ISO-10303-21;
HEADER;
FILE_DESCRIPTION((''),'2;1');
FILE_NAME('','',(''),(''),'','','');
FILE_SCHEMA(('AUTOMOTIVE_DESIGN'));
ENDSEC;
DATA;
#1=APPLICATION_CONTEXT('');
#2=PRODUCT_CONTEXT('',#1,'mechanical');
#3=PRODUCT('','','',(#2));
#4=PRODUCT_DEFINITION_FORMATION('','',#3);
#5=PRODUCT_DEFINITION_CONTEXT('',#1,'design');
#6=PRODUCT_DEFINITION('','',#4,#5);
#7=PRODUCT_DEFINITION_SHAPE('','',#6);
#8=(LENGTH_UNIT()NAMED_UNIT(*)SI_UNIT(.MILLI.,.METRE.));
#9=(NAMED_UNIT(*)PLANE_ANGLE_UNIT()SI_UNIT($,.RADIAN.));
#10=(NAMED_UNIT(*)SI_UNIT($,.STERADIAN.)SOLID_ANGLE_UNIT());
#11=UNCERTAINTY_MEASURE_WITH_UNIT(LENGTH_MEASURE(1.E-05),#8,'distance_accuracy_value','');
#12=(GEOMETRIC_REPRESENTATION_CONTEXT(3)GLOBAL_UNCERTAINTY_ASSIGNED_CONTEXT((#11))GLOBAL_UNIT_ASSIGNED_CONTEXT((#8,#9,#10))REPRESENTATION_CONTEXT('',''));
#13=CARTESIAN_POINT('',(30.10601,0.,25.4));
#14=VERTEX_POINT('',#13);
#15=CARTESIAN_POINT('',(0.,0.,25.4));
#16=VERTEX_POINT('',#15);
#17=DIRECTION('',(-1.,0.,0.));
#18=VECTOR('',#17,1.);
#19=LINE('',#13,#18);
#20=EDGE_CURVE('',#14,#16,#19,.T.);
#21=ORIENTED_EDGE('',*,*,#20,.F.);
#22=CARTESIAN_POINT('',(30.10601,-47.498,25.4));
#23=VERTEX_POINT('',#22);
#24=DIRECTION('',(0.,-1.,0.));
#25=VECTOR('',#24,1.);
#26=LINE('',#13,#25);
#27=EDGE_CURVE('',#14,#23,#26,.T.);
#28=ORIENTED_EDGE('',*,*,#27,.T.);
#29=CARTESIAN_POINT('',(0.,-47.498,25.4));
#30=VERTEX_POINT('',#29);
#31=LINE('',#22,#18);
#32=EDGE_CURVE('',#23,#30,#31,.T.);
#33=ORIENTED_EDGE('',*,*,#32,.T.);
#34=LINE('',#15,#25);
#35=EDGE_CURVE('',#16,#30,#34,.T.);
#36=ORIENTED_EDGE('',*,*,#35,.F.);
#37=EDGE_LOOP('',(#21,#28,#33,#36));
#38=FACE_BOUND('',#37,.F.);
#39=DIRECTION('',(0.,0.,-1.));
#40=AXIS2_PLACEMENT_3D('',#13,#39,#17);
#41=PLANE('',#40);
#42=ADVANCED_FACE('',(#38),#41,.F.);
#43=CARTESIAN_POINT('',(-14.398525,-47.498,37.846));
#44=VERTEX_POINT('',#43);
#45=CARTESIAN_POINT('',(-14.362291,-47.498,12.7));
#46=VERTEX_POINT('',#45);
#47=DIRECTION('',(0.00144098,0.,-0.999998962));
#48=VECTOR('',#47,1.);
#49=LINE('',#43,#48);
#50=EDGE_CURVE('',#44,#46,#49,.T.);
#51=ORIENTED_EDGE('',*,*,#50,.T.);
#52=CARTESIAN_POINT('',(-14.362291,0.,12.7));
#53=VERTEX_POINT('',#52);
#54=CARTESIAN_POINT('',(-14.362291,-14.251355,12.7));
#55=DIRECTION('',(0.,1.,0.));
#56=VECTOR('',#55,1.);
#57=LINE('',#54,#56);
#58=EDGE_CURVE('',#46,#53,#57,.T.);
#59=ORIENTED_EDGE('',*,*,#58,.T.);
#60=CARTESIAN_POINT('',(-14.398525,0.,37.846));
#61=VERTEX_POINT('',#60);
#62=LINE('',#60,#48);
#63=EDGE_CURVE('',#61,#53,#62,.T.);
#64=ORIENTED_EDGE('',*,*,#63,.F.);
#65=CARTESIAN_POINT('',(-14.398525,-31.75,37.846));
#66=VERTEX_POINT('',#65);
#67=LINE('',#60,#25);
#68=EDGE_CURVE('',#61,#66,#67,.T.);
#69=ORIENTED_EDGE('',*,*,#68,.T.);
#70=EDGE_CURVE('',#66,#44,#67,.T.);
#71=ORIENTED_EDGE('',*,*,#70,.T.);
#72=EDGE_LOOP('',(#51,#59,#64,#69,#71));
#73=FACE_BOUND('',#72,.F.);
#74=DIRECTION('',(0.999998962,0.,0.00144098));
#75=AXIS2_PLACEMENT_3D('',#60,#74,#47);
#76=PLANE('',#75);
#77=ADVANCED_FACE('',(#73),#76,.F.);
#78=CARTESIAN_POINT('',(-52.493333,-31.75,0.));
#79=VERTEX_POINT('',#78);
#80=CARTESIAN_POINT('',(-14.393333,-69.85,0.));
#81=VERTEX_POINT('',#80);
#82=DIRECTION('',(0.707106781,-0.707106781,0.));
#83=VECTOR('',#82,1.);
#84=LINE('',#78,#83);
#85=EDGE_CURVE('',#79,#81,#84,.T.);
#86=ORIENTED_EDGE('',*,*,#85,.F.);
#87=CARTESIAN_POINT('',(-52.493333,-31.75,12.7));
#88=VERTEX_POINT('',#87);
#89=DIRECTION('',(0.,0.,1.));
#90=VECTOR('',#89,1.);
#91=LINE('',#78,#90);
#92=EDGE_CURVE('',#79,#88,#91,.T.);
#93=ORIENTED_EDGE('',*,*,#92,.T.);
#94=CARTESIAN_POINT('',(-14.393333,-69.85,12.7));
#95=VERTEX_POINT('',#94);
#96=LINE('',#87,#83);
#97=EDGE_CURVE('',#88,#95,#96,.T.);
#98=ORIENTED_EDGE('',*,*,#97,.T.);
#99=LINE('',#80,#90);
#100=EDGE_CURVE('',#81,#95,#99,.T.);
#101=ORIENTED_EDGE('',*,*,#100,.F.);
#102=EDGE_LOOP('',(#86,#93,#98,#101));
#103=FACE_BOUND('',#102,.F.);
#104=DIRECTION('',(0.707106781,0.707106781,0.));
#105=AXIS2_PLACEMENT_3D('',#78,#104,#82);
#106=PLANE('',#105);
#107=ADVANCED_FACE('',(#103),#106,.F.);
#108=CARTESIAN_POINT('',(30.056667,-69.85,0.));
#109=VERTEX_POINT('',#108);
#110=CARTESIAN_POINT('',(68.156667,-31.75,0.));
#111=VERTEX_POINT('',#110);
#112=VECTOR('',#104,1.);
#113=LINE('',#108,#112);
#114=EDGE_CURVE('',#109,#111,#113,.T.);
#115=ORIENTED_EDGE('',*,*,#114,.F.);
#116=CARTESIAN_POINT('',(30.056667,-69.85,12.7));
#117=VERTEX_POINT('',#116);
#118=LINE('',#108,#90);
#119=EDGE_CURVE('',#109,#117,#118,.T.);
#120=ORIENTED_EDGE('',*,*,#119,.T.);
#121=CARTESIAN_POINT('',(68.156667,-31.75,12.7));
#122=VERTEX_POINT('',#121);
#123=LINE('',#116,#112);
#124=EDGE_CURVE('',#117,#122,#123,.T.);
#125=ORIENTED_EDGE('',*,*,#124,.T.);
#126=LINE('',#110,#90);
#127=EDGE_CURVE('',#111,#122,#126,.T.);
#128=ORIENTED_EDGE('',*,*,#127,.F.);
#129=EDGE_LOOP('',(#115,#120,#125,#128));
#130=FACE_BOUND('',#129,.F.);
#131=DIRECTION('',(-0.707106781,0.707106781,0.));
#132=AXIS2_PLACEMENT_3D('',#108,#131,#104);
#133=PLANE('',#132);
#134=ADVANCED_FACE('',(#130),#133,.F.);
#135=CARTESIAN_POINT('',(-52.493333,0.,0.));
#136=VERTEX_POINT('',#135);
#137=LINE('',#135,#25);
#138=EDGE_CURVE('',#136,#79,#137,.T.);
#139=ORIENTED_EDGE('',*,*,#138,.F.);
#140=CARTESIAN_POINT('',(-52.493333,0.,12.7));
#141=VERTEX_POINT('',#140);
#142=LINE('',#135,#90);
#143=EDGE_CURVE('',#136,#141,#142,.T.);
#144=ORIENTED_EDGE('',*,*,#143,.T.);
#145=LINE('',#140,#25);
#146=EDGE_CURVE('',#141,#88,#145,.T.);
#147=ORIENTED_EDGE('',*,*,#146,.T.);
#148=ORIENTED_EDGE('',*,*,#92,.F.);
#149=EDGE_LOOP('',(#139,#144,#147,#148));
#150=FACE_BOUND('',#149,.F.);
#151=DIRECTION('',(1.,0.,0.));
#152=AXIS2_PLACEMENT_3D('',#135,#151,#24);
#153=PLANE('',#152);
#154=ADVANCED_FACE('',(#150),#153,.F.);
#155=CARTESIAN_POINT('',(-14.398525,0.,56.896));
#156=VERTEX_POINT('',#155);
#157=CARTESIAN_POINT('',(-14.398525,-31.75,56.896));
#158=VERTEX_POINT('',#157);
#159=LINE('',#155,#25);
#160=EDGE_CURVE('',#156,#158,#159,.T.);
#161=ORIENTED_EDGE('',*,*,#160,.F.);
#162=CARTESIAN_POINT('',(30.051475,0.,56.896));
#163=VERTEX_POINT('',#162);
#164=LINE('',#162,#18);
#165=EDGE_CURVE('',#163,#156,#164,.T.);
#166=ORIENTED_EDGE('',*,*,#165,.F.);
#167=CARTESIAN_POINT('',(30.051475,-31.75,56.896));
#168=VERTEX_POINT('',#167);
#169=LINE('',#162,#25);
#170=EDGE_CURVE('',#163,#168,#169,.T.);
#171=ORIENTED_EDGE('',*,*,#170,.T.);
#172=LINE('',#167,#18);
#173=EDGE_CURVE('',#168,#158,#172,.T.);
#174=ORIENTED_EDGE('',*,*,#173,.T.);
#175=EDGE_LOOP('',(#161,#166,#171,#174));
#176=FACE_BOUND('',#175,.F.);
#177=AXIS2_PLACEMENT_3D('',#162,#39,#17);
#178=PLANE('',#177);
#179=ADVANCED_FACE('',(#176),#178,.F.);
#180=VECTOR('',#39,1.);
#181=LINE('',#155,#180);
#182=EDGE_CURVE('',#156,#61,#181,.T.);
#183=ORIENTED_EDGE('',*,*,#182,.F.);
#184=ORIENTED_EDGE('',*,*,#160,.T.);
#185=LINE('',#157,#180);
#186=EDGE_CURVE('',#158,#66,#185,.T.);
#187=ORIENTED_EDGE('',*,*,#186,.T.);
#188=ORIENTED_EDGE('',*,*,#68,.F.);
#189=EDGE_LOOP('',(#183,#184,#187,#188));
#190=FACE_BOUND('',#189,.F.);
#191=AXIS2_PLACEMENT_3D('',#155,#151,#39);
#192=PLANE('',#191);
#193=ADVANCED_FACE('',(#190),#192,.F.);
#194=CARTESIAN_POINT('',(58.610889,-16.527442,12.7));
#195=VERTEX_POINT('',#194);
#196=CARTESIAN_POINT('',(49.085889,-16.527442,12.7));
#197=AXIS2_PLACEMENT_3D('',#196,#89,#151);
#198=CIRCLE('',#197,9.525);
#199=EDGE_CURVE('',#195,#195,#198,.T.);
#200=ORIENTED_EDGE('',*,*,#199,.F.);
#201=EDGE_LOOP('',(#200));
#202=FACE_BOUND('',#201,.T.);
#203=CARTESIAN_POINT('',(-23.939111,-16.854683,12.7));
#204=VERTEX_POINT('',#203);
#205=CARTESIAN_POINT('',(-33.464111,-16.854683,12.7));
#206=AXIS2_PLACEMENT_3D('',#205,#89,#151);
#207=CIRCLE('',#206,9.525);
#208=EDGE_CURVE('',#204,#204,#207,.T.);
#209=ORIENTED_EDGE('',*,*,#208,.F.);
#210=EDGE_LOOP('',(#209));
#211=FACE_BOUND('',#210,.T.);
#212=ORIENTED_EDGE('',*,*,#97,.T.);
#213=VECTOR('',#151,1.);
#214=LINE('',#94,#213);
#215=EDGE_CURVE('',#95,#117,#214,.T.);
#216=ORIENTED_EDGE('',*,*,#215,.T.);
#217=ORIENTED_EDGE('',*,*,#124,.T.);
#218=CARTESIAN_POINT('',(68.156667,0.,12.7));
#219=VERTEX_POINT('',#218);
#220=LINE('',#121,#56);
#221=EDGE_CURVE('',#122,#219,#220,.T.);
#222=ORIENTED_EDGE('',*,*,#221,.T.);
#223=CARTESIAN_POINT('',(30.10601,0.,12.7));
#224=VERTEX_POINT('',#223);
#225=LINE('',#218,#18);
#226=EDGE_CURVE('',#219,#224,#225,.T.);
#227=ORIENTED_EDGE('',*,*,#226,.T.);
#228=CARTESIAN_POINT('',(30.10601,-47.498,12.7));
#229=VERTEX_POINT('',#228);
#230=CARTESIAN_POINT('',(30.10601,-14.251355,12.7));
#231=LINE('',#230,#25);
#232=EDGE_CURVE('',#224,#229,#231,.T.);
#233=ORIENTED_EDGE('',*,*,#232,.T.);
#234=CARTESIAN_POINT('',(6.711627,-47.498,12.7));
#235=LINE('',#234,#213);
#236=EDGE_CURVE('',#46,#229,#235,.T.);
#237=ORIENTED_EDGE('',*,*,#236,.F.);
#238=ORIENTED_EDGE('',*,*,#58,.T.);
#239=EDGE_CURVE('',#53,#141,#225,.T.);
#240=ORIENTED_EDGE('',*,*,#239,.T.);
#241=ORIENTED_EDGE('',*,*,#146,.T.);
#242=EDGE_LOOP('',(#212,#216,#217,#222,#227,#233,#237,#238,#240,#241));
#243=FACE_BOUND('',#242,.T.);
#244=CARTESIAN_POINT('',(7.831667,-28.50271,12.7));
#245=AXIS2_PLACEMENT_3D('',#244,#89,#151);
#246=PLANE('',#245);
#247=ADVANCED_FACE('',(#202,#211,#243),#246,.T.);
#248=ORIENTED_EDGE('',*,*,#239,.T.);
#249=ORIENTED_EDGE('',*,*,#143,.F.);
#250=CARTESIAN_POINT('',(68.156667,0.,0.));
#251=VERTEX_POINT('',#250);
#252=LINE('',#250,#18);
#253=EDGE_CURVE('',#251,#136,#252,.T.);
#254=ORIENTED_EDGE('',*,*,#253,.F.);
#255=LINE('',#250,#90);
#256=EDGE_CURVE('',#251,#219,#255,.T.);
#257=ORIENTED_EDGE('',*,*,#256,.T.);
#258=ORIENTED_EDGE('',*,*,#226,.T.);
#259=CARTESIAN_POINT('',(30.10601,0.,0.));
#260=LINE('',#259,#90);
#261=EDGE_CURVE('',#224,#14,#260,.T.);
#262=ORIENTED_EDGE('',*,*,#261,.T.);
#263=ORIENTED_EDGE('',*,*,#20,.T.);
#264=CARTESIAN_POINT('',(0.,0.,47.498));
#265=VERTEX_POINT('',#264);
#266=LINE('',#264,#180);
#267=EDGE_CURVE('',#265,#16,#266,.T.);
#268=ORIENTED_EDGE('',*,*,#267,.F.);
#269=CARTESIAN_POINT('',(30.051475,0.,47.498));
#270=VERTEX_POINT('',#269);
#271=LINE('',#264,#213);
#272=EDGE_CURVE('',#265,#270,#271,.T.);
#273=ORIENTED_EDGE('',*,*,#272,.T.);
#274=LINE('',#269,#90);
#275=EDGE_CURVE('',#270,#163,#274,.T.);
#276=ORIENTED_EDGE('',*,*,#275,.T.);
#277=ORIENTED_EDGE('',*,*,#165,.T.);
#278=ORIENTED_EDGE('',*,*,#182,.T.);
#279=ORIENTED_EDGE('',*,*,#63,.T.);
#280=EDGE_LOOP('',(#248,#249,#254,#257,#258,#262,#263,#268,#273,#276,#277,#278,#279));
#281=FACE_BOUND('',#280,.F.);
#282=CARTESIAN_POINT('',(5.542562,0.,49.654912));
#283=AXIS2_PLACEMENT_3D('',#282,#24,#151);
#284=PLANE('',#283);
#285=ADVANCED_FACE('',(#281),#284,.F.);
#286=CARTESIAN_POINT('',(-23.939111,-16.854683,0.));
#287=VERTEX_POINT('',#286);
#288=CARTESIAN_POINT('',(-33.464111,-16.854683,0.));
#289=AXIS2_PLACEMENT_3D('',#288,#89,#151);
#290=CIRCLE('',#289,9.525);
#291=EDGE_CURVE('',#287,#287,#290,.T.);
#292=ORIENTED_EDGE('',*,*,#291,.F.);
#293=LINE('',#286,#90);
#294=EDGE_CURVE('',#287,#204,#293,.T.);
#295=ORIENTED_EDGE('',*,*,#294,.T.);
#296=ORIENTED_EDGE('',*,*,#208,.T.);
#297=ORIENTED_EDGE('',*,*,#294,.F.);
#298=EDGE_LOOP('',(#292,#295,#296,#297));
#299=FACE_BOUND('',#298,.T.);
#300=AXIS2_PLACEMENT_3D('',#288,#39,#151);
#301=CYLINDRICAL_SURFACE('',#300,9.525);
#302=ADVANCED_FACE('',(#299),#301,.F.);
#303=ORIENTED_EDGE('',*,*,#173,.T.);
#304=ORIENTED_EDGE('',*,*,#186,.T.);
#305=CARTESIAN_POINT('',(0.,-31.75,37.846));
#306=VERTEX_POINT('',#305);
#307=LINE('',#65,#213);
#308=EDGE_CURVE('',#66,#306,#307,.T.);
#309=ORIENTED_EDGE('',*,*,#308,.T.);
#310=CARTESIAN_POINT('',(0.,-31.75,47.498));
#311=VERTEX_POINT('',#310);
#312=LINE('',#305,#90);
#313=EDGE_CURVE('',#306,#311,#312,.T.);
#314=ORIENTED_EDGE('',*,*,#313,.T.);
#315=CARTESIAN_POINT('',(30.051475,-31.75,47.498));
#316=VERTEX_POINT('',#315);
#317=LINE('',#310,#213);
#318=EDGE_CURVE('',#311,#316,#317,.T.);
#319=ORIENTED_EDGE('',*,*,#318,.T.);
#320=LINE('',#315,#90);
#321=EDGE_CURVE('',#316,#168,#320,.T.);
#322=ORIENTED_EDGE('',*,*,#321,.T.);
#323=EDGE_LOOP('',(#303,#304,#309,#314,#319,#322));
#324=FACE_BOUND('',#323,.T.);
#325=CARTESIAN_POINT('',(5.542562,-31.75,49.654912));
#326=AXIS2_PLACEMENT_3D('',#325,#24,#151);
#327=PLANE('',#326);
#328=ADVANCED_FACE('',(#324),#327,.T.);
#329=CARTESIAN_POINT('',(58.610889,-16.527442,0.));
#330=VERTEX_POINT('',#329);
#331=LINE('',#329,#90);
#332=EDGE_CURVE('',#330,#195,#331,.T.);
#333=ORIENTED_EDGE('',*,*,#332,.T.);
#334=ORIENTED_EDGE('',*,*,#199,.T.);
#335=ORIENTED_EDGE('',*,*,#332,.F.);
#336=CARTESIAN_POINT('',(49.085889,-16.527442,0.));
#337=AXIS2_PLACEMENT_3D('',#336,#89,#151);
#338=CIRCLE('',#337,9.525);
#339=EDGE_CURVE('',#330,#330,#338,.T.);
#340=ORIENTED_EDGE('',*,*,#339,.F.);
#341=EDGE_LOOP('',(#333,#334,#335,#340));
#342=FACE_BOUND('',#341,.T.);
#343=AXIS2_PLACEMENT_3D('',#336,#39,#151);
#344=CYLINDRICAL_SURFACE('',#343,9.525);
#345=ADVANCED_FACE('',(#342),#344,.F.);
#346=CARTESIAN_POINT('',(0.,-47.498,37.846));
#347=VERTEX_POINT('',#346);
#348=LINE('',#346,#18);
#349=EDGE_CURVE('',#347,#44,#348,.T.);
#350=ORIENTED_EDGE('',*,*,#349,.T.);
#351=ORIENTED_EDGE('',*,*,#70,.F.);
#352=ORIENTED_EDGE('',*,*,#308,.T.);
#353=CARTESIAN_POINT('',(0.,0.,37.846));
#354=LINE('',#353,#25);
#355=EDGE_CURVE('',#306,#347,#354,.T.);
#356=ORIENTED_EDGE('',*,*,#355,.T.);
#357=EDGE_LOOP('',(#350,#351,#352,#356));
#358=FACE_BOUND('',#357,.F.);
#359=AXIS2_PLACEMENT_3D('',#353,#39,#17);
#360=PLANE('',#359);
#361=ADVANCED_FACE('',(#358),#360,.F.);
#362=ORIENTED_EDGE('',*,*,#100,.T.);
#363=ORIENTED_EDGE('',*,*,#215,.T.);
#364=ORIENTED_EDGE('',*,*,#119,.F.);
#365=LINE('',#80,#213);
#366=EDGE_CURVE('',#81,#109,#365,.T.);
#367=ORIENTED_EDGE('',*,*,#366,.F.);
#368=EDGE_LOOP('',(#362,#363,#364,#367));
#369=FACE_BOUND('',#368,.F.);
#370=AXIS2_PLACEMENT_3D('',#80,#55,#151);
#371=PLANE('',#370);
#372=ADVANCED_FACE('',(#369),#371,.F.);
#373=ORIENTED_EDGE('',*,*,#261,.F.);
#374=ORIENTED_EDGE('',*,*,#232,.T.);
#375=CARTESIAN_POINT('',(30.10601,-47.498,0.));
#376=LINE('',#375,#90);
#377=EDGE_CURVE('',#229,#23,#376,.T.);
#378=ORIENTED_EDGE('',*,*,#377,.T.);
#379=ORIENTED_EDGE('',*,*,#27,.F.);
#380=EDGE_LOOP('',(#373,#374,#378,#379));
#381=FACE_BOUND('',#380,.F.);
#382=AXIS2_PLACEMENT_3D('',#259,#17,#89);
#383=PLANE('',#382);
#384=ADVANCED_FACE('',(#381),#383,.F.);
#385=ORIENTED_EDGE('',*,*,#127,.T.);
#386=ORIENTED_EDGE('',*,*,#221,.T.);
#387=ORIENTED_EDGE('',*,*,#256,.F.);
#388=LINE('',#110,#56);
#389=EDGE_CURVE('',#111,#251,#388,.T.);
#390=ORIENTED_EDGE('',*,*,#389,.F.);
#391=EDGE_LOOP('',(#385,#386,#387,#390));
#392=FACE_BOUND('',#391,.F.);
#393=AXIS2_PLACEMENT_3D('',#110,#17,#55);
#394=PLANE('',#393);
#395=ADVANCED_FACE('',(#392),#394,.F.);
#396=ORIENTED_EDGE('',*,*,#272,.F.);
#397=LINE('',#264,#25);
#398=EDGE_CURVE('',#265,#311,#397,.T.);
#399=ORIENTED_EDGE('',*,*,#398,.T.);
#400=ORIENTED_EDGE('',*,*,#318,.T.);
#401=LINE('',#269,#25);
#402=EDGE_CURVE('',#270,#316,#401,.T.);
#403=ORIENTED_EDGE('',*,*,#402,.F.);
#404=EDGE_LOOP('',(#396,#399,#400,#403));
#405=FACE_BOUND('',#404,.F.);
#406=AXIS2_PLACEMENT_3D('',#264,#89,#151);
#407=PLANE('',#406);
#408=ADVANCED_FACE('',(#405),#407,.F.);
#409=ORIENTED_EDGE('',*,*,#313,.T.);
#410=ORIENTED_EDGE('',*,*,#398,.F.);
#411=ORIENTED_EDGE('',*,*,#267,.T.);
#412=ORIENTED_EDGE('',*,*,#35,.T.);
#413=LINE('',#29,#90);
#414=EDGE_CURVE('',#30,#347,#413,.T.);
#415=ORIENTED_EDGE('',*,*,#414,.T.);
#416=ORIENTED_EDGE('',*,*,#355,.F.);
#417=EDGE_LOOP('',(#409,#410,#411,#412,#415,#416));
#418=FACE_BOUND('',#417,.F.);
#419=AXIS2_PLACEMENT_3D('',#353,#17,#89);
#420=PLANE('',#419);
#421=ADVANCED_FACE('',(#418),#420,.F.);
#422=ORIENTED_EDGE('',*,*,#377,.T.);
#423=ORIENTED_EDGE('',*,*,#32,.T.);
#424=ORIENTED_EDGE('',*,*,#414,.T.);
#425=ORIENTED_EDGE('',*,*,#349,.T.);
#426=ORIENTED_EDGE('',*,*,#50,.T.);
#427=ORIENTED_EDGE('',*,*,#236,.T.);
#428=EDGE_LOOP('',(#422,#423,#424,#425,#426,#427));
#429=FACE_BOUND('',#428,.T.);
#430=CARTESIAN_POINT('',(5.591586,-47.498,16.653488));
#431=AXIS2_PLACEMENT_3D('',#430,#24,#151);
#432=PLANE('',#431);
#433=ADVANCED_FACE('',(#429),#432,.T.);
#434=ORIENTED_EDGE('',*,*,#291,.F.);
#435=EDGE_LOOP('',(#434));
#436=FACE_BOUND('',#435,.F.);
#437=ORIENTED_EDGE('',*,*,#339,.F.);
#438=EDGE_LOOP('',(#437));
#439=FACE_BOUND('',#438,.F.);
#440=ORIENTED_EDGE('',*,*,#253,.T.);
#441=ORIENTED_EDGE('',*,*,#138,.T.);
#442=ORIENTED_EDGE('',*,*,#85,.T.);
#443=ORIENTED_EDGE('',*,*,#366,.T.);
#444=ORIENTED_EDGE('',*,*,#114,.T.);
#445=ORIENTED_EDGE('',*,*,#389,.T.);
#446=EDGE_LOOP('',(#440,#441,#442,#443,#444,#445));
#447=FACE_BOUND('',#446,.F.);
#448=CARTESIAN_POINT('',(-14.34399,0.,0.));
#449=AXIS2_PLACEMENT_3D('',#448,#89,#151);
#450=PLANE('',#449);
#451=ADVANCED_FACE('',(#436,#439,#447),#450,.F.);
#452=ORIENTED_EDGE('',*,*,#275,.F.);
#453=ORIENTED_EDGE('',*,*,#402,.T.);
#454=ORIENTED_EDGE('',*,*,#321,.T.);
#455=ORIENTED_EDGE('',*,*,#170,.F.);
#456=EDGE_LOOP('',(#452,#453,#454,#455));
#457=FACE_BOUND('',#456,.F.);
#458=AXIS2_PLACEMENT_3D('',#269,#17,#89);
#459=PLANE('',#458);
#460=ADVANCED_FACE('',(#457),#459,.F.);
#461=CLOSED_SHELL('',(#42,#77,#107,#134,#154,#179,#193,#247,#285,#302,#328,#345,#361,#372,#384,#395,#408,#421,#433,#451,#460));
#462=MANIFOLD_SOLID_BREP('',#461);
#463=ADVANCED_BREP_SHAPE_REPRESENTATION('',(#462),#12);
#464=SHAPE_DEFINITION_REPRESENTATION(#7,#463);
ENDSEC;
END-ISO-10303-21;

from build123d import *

# Parameters (mm, degrees)
F0_R     = 9.525
F1_DEPTH = 12.7
F3_DEPTH = 47.498
F4_DEPTH = 31.75


# Not quite as in the source:
# - a feature names something its author has since deleted; it is built from what else it names


with BuildPart() as f1:
    # F0 (on Top) → F1 (new body)
    with BuildSketch(Plane.XY):
        Polygon((68.1566672574, 0), (-52.4933327426, 0), (-52.4933327426, -31.75), (-14.3933327426, -69.85), (30.0566672574, -69.85), (68.1566672574, -31.75), align=None)
        with Locations((-33.4641109884, -16.8546829373)):
            Circle(F0_R, mode=Mode.SUBTRACT)
        with Locations((49.0858890116, -16.5274422616)):
            Circle(F0_R, mode=Mode.SUBTRACT)
    extrude(amount=F1_DEPTH)

    # F2 (on Front) → F3 (join)
    with BuildSketch(Plane.XZ):
        Polygon((-14.398525469, 37.846), (-14.3439900845, 0), (30.1060099155, 0), (30.1060099155, 25.4), (0, 25.4), (0, 37.846), align=None)
    extrude(amount=F3_DEPTH)

    # F2 (on Front) → F4 (join)
    with BuildSketch(Plane.XZ):
        Polygon((-14.398525469, 56.896), (-14.398525469, 37.846), (0, 37.846), (0, 47.498), (30.051474531, 47.498), (30.051474531, 56.896), align=None)
    extrude(amount=F4_DEPTH)


solid = f1.part
